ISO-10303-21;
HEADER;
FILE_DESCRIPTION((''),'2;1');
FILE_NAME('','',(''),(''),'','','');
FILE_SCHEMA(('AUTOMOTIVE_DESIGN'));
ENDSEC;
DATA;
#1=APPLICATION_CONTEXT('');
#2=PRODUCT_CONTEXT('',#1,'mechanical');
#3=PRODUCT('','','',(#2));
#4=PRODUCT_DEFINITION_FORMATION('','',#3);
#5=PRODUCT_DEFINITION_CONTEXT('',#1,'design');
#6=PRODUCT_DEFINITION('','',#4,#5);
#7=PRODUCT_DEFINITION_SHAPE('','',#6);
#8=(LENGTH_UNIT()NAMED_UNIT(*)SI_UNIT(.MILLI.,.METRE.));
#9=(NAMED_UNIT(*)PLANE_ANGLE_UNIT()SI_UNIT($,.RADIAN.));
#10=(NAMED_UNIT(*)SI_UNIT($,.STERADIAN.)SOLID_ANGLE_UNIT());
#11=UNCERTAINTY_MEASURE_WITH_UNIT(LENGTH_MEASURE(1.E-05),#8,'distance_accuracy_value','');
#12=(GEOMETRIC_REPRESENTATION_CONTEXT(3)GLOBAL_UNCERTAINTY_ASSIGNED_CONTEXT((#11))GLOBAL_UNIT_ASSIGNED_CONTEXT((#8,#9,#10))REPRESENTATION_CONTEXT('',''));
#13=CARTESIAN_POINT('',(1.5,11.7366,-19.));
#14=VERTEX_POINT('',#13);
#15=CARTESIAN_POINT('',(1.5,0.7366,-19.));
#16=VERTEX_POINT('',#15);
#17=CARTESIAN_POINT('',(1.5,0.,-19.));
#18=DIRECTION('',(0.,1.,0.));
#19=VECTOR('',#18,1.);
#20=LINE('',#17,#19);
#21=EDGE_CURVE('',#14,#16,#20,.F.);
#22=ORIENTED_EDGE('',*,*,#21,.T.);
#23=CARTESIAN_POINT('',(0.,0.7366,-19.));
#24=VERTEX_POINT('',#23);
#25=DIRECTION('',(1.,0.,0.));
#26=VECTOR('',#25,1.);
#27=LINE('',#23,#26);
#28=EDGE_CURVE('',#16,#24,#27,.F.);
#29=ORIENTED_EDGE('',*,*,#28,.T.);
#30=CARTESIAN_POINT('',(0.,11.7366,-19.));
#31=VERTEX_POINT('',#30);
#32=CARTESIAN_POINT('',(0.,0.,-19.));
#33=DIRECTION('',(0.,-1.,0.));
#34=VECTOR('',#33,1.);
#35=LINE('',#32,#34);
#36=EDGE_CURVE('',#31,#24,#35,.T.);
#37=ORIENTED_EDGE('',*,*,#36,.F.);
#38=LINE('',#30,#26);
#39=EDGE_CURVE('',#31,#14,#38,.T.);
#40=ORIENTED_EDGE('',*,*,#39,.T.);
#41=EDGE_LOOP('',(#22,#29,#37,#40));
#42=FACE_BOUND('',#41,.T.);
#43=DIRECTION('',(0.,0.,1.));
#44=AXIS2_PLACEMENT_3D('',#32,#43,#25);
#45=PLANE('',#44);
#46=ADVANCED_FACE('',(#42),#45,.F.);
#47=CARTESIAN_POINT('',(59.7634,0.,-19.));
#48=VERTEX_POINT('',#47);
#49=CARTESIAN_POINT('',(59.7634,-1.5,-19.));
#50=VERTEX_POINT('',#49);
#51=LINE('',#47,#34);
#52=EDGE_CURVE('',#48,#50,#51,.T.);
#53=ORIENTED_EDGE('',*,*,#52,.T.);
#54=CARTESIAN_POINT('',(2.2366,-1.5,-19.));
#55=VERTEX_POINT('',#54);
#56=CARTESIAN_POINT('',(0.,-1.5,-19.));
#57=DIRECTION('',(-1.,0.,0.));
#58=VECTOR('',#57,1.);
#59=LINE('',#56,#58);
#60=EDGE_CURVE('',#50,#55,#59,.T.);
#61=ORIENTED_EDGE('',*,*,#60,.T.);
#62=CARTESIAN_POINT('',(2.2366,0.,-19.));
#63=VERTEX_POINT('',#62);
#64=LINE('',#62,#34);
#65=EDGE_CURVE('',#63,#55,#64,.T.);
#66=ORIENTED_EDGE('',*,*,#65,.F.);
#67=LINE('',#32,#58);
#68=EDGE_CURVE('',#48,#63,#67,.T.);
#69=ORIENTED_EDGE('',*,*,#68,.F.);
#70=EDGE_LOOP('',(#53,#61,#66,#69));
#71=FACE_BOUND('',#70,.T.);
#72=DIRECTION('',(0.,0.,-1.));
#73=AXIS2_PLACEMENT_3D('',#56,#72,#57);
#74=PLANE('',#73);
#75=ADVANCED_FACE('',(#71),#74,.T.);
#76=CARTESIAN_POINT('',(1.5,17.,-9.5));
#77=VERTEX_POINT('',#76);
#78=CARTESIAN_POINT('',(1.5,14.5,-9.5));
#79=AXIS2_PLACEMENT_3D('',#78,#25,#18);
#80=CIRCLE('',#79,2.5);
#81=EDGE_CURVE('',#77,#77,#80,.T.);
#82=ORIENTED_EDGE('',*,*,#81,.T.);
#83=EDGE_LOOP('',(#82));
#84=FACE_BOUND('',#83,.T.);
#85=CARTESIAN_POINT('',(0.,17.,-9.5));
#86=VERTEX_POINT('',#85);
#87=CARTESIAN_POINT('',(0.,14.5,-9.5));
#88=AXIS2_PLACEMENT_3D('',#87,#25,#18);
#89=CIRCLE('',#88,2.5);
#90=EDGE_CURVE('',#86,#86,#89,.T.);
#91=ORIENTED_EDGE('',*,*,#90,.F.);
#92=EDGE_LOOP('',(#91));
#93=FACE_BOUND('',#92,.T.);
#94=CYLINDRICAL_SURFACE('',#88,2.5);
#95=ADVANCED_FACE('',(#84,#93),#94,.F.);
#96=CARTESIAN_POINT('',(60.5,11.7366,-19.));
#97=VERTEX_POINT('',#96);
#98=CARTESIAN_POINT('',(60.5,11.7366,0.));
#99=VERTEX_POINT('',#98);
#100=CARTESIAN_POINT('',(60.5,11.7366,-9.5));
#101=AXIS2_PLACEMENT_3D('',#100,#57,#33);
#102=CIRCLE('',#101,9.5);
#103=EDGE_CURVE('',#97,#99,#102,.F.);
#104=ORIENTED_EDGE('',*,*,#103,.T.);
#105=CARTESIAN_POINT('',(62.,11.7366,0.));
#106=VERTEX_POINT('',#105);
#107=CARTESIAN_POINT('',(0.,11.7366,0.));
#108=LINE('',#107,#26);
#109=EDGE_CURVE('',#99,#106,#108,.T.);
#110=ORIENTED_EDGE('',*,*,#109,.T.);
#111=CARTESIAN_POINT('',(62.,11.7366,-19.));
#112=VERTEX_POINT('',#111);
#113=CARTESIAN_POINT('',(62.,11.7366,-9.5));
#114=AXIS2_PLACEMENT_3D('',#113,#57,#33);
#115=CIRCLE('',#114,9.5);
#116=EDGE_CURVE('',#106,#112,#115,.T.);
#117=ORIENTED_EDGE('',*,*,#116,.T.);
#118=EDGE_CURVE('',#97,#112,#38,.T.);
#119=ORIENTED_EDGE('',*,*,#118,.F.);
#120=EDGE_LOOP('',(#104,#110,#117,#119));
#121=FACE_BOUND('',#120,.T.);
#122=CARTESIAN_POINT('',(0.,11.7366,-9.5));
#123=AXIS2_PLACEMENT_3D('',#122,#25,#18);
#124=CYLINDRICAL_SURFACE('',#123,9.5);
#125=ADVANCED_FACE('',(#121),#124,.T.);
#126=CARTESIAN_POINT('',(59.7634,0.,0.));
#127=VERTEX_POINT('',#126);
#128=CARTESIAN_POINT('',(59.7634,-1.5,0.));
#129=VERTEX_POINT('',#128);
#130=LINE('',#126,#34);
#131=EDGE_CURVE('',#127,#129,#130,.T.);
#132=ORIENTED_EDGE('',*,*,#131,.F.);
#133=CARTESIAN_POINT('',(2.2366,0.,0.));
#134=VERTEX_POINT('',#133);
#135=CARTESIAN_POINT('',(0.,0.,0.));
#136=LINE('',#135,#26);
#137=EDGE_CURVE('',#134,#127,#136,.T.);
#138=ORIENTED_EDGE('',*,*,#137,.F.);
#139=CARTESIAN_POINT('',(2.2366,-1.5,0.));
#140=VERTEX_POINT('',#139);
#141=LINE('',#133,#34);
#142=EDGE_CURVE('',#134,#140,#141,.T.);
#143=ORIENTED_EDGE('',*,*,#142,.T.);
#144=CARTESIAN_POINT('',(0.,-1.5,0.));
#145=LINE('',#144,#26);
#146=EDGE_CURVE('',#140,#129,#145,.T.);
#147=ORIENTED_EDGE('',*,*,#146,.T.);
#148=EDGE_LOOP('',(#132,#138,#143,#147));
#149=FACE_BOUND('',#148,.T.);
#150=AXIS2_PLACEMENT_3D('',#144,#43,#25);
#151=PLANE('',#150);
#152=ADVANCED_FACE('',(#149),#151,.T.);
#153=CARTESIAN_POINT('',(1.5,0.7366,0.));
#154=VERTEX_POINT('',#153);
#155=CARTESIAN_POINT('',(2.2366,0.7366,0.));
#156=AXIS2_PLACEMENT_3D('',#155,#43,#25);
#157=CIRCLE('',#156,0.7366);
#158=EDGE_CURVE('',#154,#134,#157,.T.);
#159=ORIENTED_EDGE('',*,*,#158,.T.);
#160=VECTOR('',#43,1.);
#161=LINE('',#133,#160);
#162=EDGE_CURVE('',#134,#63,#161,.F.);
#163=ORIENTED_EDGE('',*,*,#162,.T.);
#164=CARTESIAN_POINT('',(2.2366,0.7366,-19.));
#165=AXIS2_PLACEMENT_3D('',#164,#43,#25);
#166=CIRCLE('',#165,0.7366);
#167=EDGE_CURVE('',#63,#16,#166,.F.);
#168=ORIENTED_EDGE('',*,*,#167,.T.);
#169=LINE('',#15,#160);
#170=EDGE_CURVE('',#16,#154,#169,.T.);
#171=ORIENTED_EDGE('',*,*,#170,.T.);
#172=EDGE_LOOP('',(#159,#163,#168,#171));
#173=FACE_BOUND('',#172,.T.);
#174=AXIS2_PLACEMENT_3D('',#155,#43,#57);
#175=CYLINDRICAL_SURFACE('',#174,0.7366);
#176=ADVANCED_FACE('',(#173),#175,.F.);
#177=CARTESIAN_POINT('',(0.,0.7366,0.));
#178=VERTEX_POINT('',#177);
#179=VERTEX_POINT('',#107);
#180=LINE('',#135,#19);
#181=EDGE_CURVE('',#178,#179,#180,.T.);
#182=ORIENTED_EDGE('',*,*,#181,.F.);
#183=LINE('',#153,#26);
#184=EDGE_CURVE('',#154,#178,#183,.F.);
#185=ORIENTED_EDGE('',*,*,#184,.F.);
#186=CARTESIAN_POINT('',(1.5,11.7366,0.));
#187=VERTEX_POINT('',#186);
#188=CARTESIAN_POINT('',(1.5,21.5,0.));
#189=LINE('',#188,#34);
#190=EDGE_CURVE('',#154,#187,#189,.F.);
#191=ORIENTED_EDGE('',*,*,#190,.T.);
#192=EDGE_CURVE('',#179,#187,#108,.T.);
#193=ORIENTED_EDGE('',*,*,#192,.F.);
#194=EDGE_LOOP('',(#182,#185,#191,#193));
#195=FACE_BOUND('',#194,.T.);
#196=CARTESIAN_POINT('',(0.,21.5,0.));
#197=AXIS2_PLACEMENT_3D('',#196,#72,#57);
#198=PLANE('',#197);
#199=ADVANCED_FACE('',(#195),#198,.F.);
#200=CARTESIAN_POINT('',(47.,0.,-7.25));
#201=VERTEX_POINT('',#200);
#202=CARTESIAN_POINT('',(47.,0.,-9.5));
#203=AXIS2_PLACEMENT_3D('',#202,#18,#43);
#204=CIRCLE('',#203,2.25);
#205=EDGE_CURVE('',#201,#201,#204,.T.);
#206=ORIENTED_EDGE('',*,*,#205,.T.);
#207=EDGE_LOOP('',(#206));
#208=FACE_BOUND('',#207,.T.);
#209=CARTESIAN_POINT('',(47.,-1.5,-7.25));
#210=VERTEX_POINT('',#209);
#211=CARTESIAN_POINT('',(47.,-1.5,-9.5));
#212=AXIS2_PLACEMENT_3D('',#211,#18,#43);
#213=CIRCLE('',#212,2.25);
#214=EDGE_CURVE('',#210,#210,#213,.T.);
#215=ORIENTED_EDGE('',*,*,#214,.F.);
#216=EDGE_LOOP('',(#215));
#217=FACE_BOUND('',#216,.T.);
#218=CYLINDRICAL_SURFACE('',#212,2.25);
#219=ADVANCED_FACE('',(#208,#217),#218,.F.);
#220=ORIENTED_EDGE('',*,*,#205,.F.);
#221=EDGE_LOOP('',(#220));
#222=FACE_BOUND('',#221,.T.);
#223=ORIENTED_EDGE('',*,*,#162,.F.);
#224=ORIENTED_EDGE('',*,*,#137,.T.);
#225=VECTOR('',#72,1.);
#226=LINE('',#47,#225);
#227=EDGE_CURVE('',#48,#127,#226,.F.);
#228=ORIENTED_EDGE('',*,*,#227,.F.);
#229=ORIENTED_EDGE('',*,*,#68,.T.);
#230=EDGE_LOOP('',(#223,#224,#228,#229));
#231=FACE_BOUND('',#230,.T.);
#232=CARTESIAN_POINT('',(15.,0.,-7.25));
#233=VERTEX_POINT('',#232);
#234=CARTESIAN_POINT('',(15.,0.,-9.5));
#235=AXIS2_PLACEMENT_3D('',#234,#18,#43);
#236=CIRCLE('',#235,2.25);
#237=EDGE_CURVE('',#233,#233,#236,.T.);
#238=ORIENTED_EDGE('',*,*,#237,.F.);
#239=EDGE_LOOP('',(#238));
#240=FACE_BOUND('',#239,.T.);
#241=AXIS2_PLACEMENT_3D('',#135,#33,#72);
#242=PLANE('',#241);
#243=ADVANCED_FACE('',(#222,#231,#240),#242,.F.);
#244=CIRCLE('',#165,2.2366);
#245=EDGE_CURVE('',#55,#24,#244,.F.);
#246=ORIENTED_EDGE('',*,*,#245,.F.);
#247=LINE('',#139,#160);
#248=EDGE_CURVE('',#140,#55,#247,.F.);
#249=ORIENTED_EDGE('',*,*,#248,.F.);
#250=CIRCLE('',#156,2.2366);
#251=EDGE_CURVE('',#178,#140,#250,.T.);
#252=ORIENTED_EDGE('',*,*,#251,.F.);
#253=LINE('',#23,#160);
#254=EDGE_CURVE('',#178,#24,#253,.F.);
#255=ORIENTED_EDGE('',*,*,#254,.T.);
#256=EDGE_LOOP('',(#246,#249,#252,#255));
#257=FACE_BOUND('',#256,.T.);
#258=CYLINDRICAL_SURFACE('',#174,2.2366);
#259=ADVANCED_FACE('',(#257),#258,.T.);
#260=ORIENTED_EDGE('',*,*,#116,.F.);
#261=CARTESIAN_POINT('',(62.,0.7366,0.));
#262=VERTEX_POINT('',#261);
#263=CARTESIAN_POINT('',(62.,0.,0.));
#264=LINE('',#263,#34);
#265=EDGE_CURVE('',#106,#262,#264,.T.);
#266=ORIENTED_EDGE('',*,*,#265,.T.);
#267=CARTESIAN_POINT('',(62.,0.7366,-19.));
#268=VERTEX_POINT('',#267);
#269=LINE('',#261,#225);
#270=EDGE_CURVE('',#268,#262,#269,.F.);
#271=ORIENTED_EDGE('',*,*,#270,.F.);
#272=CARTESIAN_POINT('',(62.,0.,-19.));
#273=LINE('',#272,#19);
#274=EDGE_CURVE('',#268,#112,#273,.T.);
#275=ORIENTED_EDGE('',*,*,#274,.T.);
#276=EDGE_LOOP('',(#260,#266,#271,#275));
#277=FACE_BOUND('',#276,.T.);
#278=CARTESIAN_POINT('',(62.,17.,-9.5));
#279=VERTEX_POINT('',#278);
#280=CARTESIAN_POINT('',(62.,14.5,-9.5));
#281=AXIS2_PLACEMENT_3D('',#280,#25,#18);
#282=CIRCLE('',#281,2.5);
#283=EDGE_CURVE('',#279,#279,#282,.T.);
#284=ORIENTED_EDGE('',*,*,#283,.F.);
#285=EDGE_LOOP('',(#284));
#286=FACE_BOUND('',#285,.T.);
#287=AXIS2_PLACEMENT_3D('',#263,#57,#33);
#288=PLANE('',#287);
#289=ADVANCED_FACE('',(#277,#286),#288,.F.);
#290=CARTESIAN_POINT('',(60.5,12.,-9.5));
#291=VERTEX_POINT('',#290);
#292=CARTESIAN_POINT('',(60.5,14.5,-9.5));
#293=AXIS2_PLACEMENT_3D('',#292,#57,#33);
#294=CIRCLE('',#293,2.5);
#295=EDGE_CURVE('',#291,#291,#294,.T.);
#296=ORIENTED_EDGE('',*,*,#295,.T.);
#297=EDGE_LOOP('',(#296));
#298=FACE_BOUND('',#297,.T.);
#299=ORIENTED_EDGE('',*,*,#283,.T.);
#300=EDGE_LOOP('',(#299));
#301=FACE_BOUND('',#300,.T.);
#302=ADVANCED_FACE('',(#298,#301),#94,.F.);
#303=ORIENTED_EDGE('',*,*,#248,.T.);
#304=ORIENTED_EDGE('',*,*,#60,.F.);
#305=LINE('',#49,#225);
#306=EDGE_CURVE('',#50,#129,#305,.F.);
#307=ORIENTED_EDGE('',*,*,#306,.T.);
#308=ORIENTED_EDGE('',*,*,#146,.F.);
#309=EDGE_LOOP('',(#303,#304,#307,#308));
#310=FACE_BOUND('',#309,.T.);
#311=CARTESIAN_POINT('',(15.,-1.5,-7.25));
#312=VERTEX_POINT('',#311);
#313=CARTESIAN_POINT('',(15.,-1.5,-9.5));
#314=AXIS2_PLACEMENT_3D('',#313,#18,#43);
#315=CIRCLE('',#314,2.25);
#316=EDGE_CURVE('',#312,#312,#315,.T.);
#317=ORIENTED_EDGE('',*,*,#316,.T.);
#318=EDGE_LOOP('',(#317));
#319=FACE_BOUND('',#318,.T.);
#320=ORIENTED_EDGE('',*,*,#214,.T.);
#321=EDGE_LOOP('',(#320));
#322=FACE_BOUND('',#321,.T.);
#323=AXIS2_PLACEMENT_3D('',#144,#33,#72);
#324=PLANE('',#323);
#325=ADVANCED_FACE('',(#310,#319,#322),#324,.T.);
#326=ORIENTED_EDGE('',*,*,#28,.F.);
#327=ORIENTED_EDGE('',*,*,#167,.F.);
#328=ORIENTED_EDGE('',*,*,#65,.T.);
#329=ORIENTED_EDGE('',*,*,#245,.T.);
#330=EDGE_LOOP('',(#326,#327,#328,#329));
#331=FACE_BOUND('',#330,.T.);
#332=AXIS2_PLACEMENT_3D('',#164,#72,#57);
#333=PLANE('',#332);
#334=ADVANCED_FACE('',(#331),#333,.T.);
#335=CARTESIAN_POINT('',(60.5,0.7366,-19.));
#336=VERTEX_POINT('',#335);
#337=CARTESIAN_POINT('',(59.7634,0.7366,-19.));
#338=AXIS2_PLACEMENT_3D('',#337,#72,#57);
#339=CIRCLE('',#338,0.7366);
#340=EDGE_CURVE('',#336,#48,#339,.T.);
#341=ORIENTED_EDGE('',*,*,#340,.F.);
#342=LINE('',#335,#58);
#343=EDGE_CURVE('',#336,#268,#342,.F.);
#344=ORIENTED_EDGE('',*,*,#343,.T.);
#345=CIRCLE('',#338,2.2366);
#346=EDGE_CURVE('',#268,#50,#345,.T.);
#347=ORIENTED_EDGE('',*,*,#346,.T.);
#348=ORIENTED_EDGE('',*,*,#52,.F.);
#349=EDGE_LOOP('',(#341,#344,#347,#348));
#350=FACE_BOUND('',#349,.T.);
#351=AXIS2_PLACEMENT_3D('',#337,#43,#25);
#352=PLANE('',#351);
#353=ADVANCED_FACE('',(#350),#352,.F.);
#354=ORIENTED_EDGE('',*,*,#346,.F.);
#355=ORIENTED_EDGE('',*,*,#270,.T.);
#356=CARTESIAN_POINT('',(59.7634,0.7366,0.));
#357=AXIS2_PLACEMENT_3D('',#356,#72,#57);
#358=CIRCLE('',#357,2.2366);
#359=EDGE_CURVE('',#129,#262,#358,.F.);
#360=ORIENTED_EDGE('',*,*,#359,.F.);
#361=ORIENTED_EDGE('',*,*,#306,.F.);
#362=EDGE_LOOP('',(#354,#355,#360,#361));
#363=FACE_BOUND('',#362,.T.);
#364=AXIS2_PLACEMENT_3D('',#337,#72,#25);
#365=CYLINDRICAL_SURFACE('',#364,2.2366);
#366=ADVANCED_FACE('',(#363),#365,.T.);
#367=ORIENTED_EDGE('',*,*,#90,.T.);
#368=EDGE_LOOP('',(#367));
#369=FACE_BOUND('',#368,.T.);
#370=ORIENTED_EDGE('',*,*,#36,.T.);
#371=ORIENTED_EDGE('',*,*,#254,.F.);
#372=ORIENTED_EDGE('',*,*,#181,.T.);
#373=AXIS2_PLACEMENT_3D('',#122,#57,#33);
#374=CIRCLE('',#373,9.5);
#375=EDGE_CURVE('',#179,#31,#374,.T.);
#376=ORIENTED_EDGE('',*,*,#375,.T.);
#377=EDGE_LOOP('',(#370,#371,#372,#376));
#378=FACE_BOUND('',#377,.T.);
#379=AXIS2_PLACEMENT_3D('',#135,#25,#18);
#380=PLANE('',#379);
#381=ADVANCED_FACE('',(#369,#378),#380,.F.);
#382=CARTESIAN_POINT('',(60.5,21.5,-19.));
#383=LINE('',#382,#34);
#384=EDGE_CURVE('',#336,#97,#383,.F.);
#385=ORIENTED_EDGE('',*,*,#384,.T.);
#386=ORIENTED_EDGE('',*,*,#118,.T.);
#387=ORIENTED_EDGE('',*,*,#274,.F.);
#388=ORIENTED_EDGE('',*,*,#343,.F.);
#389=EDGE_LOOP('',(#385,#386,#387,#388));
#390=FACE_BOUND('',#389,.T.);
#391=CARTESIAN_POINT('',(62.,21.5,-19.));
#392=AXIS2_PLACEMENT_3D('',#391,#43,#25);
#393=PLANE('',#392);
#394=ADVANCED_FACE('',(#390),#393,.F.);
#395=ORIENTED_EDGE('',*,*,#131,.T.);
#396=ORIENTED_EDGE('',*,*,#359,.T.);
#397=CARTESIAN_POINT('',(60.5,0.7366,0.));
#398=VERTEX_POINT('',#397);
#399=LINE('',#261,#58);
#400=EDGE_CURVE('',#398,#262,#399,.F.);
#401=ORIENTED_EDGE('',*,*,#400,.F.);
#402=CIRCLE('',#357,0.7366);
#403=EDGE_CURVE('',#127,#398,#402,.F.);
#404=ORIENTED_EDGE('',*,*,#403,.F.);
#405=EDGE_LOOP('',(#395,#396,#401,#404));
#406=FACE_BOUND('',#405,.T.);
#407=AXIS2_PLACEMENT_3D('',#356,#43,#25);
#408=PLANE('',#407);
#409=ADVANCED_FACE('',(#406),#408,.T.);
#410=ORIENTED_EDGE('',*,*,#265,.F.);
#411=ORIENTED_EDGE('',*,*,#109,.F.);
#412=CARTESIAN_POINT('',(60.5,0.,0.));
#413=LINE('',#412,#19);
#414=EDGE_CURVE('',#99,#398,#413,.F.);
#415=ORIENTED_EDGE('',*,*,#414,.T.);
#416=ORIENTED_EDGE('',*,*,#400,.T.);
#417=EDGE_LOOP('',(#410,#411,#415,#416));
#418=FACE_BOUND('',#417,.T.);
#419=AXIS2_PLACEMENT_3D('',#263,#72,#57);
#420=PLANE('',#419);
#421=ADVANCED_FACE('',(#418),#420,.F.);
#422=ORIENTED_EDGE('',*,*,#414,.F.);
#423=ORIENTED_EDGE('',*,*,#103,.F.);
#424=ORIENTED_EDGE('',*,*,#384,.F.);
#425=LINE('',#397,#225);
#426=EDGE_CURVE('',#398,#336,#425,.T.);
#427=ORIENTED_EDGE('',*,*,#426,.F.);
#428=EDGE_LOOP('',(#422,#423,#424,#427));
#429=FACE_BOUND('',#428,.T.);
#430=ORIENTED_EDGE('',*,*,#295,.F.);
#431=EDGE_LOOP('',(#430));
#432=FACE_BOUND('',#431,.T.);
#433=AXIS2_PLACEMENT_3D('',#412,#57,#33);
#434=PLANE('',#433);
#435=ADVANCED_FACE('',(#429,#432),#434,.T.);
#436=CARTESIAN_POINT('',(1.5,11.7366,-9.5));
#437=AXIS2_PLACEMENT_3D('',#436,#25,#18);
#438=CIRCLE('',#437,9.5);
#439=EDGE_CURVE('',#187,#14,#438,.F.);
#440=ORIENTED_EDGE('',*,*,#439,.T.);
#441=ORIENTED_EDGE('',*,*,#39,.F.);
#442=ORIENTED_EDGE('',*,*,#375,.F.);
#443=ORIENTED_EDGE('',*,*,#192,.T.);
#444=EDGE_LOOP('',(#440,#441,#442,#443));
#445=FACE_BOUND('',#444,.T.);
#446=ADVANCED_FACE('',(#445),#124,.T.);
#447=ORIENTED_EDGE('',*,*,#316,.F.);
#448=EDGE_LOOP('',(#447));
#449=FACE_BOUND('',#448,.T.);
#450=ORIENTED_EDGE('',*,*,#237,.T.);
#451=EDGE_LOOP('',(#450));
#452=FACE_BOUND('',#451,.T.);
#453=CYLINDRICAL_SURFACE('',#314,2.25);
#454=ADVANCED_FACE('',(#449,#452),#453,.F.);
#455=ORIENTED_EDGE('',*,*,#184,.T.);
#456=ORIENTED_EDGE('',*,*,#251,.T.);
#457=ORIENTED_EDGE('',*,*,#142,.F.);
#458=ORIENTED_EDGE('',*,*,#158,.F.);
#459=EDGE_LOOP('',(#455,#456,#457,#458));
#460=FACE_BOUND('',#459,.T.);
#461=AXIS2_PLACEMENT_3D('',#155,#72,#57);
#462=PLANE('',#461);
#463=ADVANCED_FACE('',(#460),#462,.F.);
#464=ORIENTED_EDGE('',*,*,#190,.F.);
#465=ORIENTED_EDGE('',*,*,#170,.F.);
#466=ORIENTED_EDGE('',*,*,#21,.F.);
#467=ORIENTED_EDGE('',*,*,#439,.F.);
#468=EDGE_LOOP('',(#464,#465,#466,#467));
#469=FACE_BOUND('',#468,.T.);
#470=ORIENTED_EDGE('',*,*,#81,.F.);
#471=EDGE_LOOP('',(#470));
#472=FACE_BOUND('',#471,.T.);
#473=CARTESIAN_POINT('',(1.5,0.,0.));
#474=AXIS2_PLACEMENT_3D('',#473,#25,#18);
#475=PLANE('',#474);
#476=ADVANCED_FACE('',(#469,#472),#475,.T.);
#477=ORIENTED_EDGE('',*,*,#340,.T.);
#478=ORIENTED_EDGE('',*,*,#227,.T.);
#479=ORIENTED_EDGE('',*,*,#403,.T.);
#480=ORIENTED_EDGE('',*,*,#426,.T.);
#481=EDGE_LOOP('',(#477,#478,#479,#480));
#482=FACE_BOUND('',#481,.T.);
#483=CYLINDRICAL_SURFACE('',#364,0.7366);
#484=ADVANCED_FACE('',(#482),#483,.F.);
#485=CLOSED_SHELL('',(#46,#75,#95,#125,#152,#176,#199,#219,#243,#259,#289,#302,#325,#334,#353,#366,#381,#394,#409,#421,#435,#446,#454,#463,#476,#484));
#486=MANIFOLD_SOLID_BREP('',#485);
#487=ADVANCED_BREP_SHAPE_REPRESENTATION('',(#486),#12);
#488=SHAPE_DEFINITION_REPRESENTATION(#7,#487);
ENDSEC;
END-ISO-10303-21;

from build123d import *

# Parameters (mm, degrees)
SKETCH1_W                    = 62
SKETCH1_H                    = 19
SKETCH1_R                    = 2.25
BASE_FLANGE1_DEPTH           = 1.5
EDGE_FLANGE1_STRIP_W         = 7.4732
EDGE_FLANGE1_STRIP_H         = 1.5
EDGE_FLANGE1_STRIP_CUT_DEPTH = 19
EDGE_FLANGE1_DEPTH           = 19
EDGE_FLANGE2_STRIP_W         = 7.4732
EDGE_FLANGE2_STRIP_H         = 1.5
EDGE_FLANGE2_STRIP_CUT_DEPTH = 19
EDGE_FLANGE2_DEPTH           = 19
SKETCH12_R                   = 2.5
CUT_EXTRUDE1_DEPTH           = 69.317274536


# Sheet-metal steps are written as plain solids
with BuildPart() as part:
    # Sketch1 → Base-Flange1 (new body)
    with BuildSketch(Plane(origin=(0, 0, 0), x_dir=(1, 0, 0), z_dir=(0, 1, 0))):
        with Locations((31, 9.5)):
            Rectangle(SKETCH1_W, SKETCH1_H)
        with Locations(Location((15, 9.5, 0), (0, 0, 270))):
            Circle(SKETCH1_R, mode=Mode.SUBTRACT)
        with Locations(Location((47, 9.5, 0), (0, 0, 270))):
            Circle(SKETCH1_R, mode=Mode.SUBTRACT)
    extrude(amount=-BASE_FLANGE1_DEPTH)

    # Edge-Flange1 strip (across the edge) → Edge-Flange1 strip cut (cut)
    with BuildSketch(Plane.XY.offset(-19)):
        with Locations((-1.5, -0.75)):
            Rectangle(EDGE_FLANGE1_STRIP_W, EDGE_FLANGE1_STRIP_H)
    extrude(amount=EDGE_FLANGE1_STRIP_CUT_DEPTH, mode=Mode.SUBTRACT)

    # Edge-Flange1 section (across the edge) → Edge-Flange1 (add)
    with BuildSketch(Plane.XY.offset(-19)):
        with BuildLine():
            Line((0, 0.7366), (0, 21.5))
            Line((0, 21.5), (1.5, 21.5))
            Line((1.5, 21.5), (1.5, 0.7366))
            ThreePointArc((1.5, 0.7366), (1.715745145, 0.215745145), (2.2366, 0))
            Line((2.2366, 0), (2.2366, -1.5))
            ThreePointArc((2.2366, -1.5), (0.655084973, -0.844915027), (0, 0.7366))
        make_face()
    extrude(amount=EDGE_FLANGE1_DEPTH)

    # Edge-Flange2 strip (across the edge) → Edge-Flange2 strip cut (cut)
    with BuildSketch(Plane(origin=(62, 0, 0), x_dir=(-1, 0, 0), z_dir=(0, 0, -1))):
        with Locations((-1.5, -0.75)):
            Rectangle(EDGE_FLANGE2_STRIP_W, EDGE_FLANGE2_STRIP_H)
    extrude(amount=EDGE_FLANGE2_STRIP_CUT_DEPTH, mode=Mode.SUBTRACT)

    # Edge-Flange2 section (across the edge) → Edge-Flange2 (add)
    with BuildSketch(Plane(origin=(62, 0, 0), x_dir=(-1, 0, 0), z_dir=(0, 0, -1))):
        with BuildLine():
            Line((0, 0.7366), (0, 21.5))
            Line((0, 21.5), (1.5, 21.5))
            Line((1.5, 21.5), (1.5, 0.7366))
            ThreePointArc((1.5, 0.7366), (1.715745145, 0.215745145), (2.2366, 0))
            Line((2.2366, 0), (2.2366, -1.5))
            ThreePointArc((2.2366, -1.5), (0.655084973, -0.844915027), (0, 0.7366))
        make_face()
    extrude(amount=EDGE_FLANGE2_DEPTH)

    # Sketch12 → Cut-Extrude1 (cut, through all)
    with BuildSketch(Plane(origin=(62, 0, 0), x_dir=(0, 0, -1), z_dir=(1, 0, 0))):
        with Locations(Location((9.5, 14.5, 0), (0, 0, 90))):
            Circle(SKETCH12_R)
        with BuildLine():
            Line((0, 11.7366), (-3.023600292, 11.7366))
            Line((-3.023600292, 11.7366), (-3.023600292, 23.521513474))
            Line((-3.023600292, 23.521513474), (21.663618521, 23.521513474))
            Line((21.663618521, 23.521513474), (21.663618521, 11.7366))
            Line((21.663618521, 11.7366), (19, 11.7366))
            ThreePointArc((19, 11.7366), (9.5, 21.2366), (0, 11.7366))
        make_face()
    extrude(amount=-CUT_EXTRUDE1_DEPTH, mode=Mode.SUBTRACT)


solid = part.part
